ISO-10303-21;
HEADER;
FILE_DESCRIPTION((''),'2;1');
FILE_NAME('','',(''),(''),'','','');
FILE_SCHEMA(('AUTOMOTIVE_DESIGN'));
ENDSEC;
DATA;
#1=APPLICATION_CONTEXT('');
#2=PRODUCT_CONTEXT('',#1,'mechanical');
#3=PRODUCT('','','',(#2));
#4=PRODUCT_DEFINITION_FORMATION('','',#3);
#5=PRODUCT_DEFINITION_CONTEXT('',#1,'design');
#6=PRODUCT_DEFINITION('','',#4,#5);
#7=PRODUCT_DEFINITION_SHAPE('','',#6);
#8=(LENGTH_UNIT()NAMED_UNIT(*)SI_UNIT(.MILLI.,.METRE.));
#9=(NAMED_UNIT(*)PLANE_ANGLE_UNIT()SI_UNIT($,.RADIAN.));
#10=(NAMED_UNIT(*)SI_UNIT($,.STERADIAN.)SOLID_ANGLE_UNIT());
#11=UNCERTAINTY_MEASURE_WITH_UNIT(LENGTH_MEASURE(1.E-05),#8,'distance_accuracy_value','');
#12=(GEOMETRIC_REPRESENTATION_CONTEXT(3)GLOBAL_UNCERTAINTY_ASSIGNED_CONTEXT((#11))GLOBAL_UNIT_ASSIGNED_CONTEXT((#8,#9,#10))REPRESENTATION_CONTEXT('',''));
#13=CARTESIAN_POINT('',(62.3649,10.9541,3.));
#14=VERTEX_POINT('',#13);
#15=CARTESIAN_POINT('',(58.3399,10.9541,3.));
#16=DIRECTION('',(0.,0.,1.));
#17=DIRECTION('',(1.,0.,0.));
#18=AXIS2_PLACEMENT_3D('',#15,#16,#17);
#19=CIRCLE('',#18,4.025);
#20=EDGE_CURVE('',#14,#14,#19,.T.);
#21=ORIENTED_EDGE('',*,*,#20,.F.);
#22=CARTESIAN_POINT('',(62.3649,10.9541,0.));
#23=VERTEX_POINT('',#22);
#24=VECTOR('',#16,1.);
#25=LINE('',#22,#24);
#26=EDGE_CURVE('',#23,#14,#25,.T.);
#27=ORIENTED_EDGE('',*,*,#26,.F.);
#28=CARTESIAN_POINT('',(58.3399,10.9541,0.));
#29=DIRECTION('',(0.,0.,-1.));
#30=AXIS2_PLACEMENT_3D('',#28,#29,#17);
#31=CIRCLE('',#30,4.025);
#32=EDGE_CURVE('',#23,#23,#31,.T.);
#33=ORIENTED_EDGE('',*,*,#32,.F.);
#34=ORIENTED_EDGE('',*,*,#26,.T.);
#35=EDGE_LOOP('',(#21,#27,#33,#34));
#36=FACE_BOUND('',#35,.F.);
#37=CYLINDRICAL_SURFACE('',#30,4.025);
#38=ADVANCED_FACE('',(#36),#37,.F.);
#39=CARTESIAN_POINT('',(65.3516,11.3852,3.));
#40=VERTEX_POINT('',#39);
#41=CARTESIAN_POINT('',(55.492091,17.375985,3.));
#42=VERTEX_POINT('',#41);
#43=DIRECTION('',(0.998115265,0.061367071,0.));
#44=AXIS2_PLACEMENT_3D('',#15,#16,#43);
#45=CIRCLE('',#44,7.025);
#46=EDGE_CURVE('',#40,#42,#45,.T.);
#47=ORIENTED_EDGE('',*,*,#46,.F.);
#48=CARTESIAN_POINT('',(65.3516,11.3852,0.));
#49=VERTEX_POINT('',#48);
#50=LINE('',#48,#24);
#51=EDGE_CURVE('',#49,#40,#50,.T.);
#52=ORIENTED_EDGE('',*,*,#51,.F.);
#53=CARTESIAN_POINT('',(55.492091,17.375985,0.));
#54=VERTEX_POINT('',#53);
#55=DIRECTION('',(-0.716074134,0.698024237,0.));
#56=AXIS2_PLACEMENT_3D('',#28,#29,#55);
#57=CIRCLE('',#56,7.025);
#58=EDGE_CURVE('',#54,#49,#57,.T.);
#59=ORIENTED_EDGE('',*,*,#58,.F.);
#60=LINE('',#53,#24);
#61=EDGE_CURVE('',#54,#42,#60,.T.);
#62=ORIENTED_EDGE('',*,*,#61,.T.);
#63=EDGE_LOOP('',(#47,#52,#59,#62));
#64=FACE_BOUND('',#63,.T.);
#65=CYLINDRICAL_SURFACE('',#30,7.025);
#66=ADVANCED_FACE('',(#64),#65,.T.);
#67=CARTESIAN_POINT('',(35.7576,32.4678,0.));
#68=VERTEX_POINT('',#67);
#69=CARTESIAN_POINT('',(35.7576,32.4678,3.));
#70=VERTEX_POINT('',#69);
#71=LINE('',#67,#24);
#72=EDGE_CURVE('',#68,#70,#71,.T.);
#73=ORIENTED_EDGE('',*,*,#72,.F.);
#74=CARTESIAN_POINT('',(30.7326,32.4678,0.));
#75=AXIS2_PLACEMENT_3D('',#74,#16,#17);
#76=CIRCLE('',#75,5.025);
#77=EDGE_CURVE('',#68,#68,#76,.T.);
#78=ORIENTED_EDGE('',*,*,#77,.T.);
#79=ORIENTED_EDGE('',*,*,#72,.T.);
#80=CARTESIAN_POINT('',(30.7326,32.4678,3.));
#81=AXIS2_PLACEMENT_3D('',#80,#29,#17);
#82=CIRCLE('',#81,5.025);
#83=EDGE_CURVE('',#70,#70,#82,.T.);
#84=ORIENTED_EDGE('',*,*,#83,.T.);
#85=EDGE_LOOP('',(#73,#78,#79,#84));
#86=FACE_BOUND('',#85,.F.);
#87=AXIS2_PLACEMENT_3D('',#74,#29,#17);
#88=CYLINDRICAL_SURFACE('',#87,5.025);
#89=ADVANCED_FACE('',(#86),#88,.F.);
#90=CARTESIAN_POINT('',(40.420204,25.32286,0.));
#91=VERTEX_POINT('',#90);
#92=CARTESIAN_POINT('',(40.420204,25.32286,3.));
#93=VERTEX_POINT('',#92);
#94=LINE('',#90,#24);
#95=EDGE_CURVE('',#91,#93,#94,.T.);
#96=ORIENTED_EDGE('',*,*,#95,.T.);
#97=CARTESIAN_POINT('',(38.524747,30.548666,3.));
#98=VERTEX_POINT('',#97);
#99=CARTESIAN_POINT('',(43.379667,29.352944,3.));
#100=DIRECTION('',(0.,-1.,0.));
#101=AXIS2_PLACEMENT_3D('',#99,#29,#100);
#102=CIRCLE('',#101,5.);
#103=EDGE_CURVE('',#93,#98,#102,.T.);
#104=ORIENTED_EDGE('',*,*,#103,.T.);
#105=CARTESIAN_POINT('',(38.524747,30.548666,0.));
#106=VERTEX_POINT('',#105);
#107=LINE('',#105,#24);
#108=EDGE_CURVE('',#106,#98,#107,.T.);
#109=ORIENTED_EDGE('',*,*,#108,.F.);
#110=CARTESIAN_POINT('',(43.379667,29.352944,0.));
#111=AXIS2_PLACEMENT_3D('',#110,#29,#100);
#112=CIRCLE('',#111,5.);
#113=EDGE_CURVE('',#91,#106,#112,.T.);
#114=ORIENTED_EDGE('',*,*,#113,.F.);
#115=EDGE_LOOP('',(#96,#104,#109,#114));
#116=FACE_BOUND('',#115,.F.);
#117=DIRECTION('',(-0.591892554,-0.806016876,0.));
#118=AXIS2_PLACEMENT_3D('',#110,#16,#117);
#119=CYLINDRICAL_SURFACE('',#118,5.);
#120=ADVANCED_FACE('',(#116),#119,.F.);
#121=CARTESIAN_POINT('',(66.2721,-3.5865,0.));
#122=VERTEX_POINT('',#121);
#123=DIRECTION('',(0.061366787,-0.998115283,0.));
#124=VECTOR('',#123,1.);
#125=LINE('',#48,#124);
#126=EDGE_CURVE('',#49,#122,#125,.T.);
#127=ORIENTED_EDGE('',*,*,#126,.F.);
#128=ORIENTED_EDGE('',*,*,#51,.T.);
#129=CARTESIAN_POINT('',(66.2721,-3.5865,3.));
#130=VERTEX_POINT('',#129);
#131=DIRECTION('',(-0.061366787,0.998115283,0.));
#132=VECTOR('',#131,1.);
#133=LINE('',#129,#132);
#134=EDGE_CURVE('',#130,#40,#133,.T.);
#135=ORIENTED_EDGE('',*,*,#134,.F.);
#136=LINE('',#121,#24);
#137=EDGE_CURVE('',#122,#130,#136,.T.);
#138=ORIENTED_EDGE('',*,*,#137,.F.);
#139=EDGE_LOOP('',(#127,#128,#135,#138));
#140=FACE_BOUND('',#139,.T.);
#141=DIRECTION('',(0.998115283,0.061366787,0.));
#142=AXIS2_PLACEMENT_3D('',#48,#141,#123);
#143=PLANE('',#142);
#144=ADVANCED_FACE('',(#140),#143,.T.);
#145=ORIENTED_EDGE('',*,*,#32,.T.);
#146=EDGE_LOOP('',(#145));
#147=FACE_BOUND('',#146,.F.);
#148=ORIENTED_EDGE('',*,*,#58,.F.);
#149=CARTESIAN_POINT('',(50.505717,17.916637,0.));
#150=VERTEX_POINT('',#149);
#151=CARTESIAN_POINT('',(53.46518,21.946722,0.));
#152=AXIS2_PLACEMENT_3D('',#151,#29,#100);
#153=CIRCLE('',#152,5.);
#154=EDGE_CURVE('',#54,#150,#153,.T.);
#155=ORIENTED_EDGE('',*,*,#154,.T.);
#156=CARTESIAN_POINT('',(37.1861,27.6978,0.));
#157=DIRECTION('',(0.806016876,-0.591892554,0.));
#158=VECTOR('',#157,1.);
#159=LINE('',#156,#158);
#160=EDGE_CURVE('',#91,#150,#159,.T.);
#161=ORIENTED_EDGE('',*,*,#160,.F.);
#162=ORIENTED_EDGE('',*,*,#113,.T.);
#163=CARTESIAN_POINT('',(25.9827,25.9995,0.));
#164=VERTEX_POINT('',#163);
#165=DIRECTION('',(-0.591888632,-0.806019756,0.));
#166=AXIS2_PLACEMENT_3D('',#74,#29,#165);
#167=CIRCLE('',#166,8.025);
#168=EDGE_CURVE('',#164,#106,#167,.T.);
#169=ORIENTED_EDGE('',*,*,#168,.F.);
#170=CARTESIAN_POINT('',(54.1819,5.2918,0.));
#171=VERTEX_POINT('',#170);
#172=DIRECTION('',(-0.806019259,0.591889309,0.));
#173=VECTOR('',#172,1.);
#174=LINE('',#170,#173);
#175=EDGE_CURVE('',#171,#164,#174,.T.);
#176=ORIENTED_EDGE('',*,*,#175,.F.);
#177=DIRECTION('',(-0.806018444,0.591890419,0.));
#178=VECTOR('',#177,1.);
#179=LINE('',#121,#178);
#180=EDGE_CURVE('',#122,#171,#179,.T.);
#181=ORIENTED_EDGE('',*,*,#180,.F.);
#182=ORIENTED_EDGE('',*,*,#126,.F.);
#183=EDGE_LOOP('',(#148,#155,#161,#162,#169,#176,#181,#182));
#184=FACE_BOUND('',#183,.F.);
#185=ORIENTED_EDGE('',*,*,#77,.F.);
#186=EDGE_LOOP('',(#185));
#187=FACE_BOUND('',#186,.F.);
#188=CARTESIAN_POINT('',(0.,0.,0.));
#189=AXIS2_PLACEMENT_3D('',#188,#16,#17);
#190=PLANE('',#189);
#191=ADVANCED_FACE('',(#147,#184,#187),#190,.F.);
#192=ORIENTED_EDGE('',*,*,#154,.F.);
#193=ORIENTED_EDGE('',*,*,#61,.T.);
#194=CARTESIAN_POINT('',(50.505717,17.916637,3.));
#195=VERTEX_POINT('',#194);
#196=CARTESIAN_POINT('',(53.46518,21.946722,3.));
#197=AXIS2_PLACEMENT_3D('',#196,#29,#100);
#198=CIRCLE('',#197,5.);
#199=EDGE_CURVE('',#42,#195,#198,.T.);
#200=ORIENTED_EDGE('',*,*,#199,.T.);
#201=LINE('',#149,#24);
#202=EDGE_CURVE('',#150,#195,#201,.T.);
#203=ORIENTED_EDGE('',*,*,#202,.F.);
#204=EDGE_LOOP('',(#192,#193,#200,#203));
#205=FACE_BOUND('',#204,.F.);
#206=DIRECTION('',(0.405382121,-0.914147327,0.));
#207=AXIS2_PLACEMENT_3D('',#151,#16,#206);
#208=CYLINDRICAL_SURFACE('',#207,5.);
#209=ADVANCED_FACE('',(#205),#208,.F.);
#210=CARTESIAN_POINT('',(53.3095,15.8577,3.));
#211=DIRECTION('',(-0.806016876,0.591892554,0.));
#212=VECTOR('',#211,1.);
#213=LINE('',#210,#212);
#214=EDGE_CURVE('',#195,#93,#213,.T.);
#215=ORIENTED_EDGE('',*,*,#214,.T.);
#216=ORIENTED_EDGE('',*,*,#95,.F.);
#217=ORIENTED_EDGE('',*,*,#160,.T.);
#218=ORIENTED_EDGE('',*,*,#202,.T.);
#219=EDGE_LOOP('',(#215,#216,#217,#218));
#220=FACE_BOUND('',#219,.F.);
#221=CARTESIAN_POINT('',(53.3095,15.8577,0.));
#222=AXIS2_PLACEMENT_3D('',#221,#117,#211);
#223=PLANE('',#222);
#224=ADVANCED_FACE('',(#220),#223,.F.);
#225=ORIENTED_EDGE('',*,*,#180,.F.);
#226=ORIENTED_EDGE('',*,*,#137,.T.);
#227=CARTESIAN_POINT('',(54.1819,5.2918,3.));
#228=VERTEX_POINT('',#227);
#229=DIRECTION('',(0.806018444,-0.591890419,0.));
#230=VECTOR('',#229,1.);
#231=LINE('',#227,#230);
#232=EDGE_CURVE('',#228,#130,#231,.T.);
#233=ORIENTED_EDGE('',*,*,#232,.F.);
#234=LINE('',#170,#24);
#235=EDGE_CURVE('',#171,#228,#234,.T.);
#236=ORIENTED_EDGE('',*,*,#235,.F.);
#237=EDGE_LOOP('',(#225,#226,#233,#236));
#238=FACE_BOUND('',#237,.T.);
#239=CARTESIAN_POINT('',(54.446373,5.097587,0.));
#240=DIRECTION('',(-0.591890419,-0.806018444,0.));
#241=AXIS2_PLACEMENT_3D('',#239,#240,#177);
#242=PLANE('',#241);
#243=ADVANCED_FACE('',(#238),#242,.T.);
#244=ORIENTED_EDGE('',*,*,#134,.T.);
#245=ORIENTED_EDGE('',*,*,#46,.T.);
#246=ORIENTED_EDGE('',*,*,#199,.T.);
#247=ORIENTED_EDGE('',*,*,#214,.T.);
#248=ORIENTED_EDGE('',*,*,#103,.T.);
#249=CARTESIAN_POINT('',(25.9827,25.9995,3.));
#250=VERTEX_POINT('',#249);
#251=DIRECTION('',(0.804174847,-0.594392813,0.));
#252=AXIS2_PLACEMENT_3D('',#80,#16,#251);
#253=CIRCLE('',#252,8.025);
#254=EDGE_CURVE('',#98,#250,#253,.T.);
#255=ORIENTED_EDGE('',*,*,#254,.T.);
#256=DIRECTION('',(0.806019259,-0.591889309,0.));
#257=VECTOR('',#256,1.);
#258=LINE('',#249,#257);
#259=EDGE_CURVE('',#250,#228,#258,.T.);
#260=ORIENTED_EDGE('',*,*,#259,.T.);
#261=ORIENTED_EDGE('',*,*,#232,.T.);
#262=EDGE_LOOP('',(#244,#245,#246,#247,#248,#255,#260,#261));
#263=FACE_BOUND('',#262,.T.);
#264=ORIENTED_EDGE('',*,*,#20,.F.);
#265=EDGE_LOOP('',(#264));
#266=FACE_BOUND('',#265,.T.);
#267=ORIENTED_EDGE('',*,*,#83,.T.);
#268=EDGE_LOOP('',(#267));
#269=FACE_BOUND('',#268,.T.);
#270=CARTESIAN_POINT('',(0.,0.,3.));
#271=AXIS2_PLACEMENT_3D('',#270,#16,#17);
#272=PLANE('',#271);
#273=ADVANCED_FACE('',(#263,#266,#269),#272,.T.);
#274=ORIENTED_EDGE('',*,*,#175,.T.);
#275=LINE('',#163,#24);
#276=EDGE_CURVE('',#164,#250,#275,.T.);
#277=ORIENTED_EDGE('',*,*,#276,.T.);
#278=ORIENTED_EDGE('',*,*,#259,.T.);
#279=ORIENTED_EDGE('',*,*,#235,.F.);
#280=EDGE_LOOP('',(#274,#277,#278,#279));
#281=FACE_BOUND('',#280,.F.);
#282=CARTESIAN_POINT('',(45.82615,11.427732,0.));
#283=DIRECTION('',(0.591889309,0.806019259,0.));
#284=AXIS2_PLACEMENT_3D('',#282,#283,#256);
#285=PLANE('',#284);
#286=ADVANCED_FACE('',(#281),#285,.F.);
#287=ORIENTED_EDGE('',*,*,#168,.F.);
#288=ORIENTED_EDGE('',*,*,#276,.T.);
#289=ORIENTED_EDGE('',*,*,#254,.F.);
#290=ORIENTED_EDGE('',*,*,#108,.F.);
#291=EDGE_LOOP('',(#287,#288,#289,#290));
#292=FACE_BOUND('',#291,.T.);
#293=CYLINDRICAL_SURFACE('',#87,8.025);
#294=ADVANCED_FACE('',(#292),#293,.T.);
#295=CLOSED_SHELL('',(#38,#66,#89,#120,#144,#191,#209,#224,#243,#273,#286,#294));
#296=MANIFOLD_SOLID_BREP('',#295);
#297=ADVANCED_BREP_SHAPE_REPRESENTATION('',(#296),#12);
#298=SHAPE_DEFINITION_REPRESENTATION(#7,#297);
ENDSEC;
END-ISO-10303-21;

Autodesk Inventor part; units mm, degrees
ref_plane "YZ Plane" through (0, 0, 0) normal (1, 0, 0) x (0, 1, 0)
ref_plane "XZ Plane" through (0, 0, 0) normal (0, 1, 0) x (-1, 0, 0)
ref_plane "XY Plane" through (0, 0, 0) normal (0, 0, 1) x (1, 0, 0)
sketch "スケッチ1" plane through (0, 0, 0) normal (0, 0, 1) x (1, 0, 0)
  line L0 (-170.6512, -31.4118) -> (202.8656, -31.4118) construction
  circle A0 centre (-14, -17.4118) radius 14 construction
  circle A1 centre (14, -17.4118) radius 14 construction
  circle A2 centre (-28.0204, 0.0121) radius 20.05 construction
  circle A3 centre (-28.0204, 0.0121) radius 5.05 construction
  circle A4 centre (8.8763, 3.8907) radius 32.05 construction
  circle A5 centre (8.8763, 3.8907) radius 10.1 construction
  circle A6 centre (54.047, 13.5882) radius 36.1 construction
  line L1 (-170.915, -81.4118) -> (490.0044, -81.4118)
  circle A7 centre (-28.0204, 0.0121) radius 22.342 construction
  circle A8 centre (-39.4931, 19.1835) radius 14 construction
  circle A9 centre (-49.0547, 7.5438) radius 14 construction
  circle A10 centre (-49.0547, -7.5196) radius 14 construction
  circle A11 centre (-39.4931, -19.1593) radius 14 construction
  circle A12 centre (8.8763, 3.8907) radius 33.05 construction
  circle A13 centre (54.047, 13.5882) radius 38.1 construction
  line L2 (-11.5565, -29.1593) -> (4.2969, -29.1593) construction
  line L3 (-67.2952, 44.8622) -> (-67.2952, -57.3934) construction
  line L4 (-149.4523, -1.6098) -> (-132.6633, -31.6026)
  line L5 (-132.7701, -31.4118) -> (-132.7701, 74.0456)
  circle A14 centre (-11.4931, -19.1593) radius 14 construction
  line L6 (-197.2268, -33.1593) -> (179.6604, -33.1593) construction
  circle A15 centre (54.047, 13.5882) radius 4.025
  circle A16 centre (54.047, 13.5882) radius 6
  circle A17 centre (-39.4931, 19.1835) radius 5
  circle A18 centre (-49.0547, 7.5438) radius 5
  circle A19 centre (-49.0547, -7.5196) radius 5
  circle A20 centre (-39.4931, -19.1593) radius 5
  circle A21 centre (-39.4931, 19.1835) radius 8 construction
  circle A22 centre (-49.0547, 7.5438) radius 8 construction
  circle A23 centre (-49.0547, -7.5196) radius 8 construction
  circle A24 centre (-39.4931, -19.1593) radius 8 construction
  circle A25 centre (-28.0204, 0.0121) radius 4.5
  circle A26 centre (8.8763, 3.8907) radius 7.5
  line L7 (-17.5497, 32.3149) -> (-46.3578, 15.0755) construction
  line L8 (-46.3578, 15.0755) -> (-51.7515, 0.0121) construction
  line L9 (-51.7515, 0.0121) -> (-46.3578, -15.0513) construction
  line L10 (-46.3578, -15.0513) -> (-37.9391, -20.0892) construction
  circle A27 centre (-32.6283, 23.2915) radius 1.3
  circle A28 centre (-46.3578, 15.0755) radius 1.3
  circle A29 centre (-51.7515, 0.0121) radius 1.3
  circle A30 centre (-46.3578, -15.0513) radius 1.3
  circle A31 centre (-32.6283, -23.2673) radius 1.3
  line L11 (-67.2952, 23.1796) -> (-67.2952, -18.1327)
  arc A32 (79.2003, -37.212) -> (87.3507, -31.2711) centre (80.4159, -30.3183) ccw
  arc A33 (8.1864, 50.8943) -> (0.9804, 51.9708) centre (3.7003, 45.5208) ccw
  line L12 (-52.2685, -33.1593) -> (56.2168, -33.1593)
  line L13 (56.2168, -33.1593) -> (79.2003, -37.212)
  arc A34 (92.7831, 8.2659) -> (29.742, 44.2162) centre (54.047, 13.5882) ccw
  line L14 (87.3507, -31.2711) -> (92.7831, 8.2659)
  line L15 (0.9804, 51.9708) -> (-67.2952, 23.1796)
  circle A35 centre (34.0114, -24.0061) radius 4.5 construction
  circle A36 centre (34.0114, -24.0061) radius 1.5
  circle A37 centre (-21.4477, 26.0369) radius 4.5 construction
  circle A38 centre (-21.4477, 26.0369) radius 1.5
  circle A39 centre (-56.0504, 23.0377) radius 1.5
  circle A40 centre (-56.0504, 23.0377) radius 3 construction
  circle A41 centre (-56.0504, 23.0377) radius 4.5 construction
  circle A42 centre (-64.2952, 0.0121) radius 1.5
  circle A43 centre (-64.2952, 0.0121) radius 3 construction
  circle A44 centre (-64.2952, 0.0121) radius 4.3311 construction
  line L16 (54.047, 13.5882) -> (99.37, -7.5264)
  line L17 (99.37, -7.5264) -> (58.3399, 10.9541)
  line L18 (58.3399, 10.9541) -> (30.7326, 32.4678)
  line L19 (30.7326, 32.4678) -> (54.047, 13.5882)
  line L20 (99.37, -7.5264) -> (491.4359, -184.1173)
  line L21 (-183.2789, 162.2213) -> (-183.2789, -125.2315)
  line L22 (516.7211, 155.5913) -> (516.7211, -155.5644)
  circle A45 centre (99.37, -7.5264) radius 7.25
  line L23 (135.8413, -23.9534) -> (383.826, -192.7834) construction
  line L24 (218.8627, -80.4751) -> (224.047, -10.6673) construction
  circle A46 centre (3.7003, 45.5208) radius 4
  circle A47 centre (122.1646, -17.7933) radius 2
  circle A48 centre (135.8413, -23.9534) radius 2
  arc A49 (134.404, -28.7424) -> (138.4753, -19.7035) centre (135.8413, -23.9534) ccw
  line L25 (134.404, -28.7424) -> (96.4236, -17.3438)
  line L26 (138.4753, -19.7035) -> (104.7697, 1.1861)
  circle A50 centre (30.7326, 32.4678) radius 2
  circle A51 centre (-16.1798, -24.0771) radius 4.5 construction
  circle A52 centre (-16.1798, -24.0771) radius 1.5
  line L27 (-67.2952, -18.1327) -> (-52.2685, -33.1593)
  circle A53 centre (-56.0504, -23.0135) radius 1.5
  circle A54 centre (-56.0504, -23.0135) radius 3 construction
  circle A55 centre (30.7326, 32.4678) radius 4
  arc A56 (56.8403, 15.6972) -> (51.3644, 11.3402) centre (54.047, 13.5882) ccw
  line L28 (96.4916, -6.1854) -> (101.9705, -5.7041) construction
  line L29 (101.9705, -5.7041) -> (99.6479, -10.6896) construction
  line L30 (99.6479, -10.6896) -> (96.4916, -6.1854) construction
  circle A57 centre (99.6479, -10.6896) radius 1.5
  circle A58 centre (101.9705, -5.7041) radius 1.5
  circle A59 centre (96.4916, -6.1854) radius 1.5
  circle A60 centre (99.37, -7.5264) radius 6
  arc A61 (97.7876, -15.8778) -> (97.5111, 0.7679) centre (99.37, -7.5264) ccw
  arc A62 (56.8403, 15.6972) -> (97.5111, 0.7679) centre (88.7632, 39.7996) ccw
  arc A63 (51.3644, 11.3402) -> (97.7876, -15.8778) centre (112.6811, 62.7237) ccw
  circle A64 centre (54.047, 13.5882) radius 8.5
  line L31 (102.9595, 0.1786) -> (57.6365, 21.2931)
  line L32 (50.4575, 5.8833) -> (95.7806, -15.2313)
  circle A65 centre (12.7384, 41.2415) radius 3 construction
  circle A66 centre (12.7384, 41.2415) radius 4.5 construction
  circle A67 centre (12.7384, 41.2415) radius 1.5
  circle A68 centre (80.4159, -30.3183) radius 4
  circle A69 centre (69.7531, -26.0108) radius 1.5
  circle A70 centre (69.7531, -26.0108) radius 4.5 construction
  circle A71 centre (-56.0504, -23.0135) radius 4.5 construction
  line L33 (8.1864, 50.8943) -> (15.9809, 44.3871)
  arc A72 (15.9809, 44.3871) -> (29.742, 44.2162) centre (22.9664, 52.7545) ccw
  circle A73 centre (-5.4761, 38.5895) radius 1.5
  circle A74 centre (-5.4761, 38.5895) radius 4.5 construction
  circle A75 centre (54.047, 13.5882) radius 50 construction
  circle A76 centre (3.7003, 45.5208) radius 2
  circle A77 centre (80.4159, -30.3183) radius 2
  circle A78 centre (54.047, 13.5882) radius 1.5 construction
  circle A79 centre (58.3399, 10.9541) radius 1.5
  circle A80 centre (58.3399, 10.9541) radius 3
  circle A81 centre (58.3399, 10.9541) radius 5
  line L34 (94.099, -16.3172) -> (55.7687, 6.6659)
  line L35 (59.8474, 15.7214) -> (102.4604, 2.2467)
  arc A82 (104.7697, 1.1861) -> (102.4604, 2.2467) centre (99.37, -7.5264) ccw
  arc A83 (94.099, -16.3172) -> (96.4236, -17.3438) centre (99.37, -7.5264) ccw
  circle A84 centre (30.7326, 32.4678) radius 5.025
  circle A85 centre (30.7326, 32.4678) radius 8.025
  circle A86 centre (58.3399, 10.9541) radius 4.025
  circle A87 centre (58.3399, 10.9541) radius 7.025
  line L36 (25.9827, 25.9995) -> (54.1819, 5.2918)
  line L37 (53.3095, 15.8577) -> (37.1861, 27.6978)
  line L38 (65.3516, 11.3852) -> (66.2721, -3.5865)
  line L39 (66.2721, -3.5865) -> (54.1819, 5.2918)
  point P0 (0, 0)
  point P1 (0, 0)
  point P2 (-49.0547, 7.5438)
  point P3 (-49.0547, -7.5196)
  dimension "d88" = 100
  dimension "d0" = 40.1
  dimension "d1" = 10.1
  dimension "d2" = 64.1
  dimension "d3" = 20.2
  dimension "d4" = 72.2
  dimension "d5" = 95
  dimension "d6" = 44.684
  dimension "d7" = 28
  dimension "d8" = 28
  dimension "d9" = 28
  dimension "d10" = 28
  dimension "d11" = 1
  dimension "d12" = 2
  dimension "d13" = 4
  dimension "d14" = 8.05
  dimension "d15" = 12
  dimension "d16" = 10
  dimension "d17" = 10
  dimension "d18" = 10
  dimension "d19" = 10
  dimension "d20" = 3
  dimension "d21" = 3
  dimension "d22" = 3
  dimension "d23" = 3
  dimension "d24" = 9
  dimension "d25" = 15
  dimension "d26" = 2.6
  dimension "d27" = 2.6
  dimension "d28" = 2.6
  dimension "d29" = 2.6
  dimension "d30" = 2.6
  dimension "d31" = 1
  dimension "d32" = 9
  dimension "d33" = 3
  dimension "d34" = 9
  dimension "d35" = 3
  dimension "d36" = 3
  dimension "d37" = 6
  dimension "d38" = 9
  dimension "d39" = 3
  dimension "d40" = 6
  dimension "d41" = 50
  dimension "d42" = 45
  dimension "d43" = 35
  dimension "d44" = 30
  dimension "d45" = 39
  dimension "d46" = 430
  dimension "d47" = 700
  dimension "d48" = 14.5
  dimension "d49" = 300
  dimension "d50" = 10
  dimension "d51" = 70
  dimension "d52" = 120
  dimension "d53" = 140
  dimension "d54" = 8
  dimension "d55" = 4
  dimension "d56" = 4
  dimension "d57" = 15
  dimension "d58" = 25
  dimension "d59" = 10
  dimension "d60" = 4
  dimension "d61" = 9
  dimension "d62" = 3
  dimension "d63" = 3
extrude "押し出し1" add sketch "スケッチ1" along normal blind 3 contours A86 A62 A56 A81 A15 | A15 A81 A16 A86 | A86 L18 A81 A56 A62 | A86 L16 A81 L18 | A81 A56 A87 A15 | A15 A87 A16 A81 | A16 A81 A64 A86 | A81 L16 L19 A87 L18 | L18 A87 A56 A81 | A86 A15 A81 L16 | A16 A87 A64 L35 A81 | A64 A81 L16 A62 A86 | A87 L19 A56 L18 | L18 A56 L37 A87 | A81 A15 A63 A56 A87 L19 L16 | A86 A16 A63 A81 A15 | L37 A56 L18 A15 | A15 L18 A16 L37 | L35 A64 A81 | A62 L16 A86 | A56 L19 A15 L18 | A87 A56 L19 | A81 A63 A15 | A86 A64 A81 A63 A16 | A15 L19 A16 L18 | A16 L18 A64 L37 | A87 L35 A64 | A64 L35 A87 L16 A81 | A62 A81 L17 A86 L16 | L16 A81 A62 | A56 A87 A15 L19 | A56 A63 A15 A87 | A63 A81 A16 A87 A15 | A63 A16 A81 | A63 A81 A16 | A86 L17 A81 A64 | A15 A87 A16 L19 | A16 L19 A64 L18 | A64 L18 A85 L37 | L16 A87 L17 A62 A81 | A62 L17 A81 | A81 A63 A64 A87 A16 | A81 L34 A64 A63 | A81 L17 A62 A87 L34 A64 | A64 L34 A81 | A16 A87 L36 A64 L19 | A64 L19 A85 L18 | A85 L18 A84 L19 | L38 L16 A87 | L16 L38 L17 A87 | L17 A87 A62 | A64 L34 A87 A63 | A63 A87 A64 | A64 L36 A85 L19 | A85 L19 A84 L18 | L17 L38 A62 A87 | A62 L38 L34 A87 | A87 A64 L39 | A87 L34 L38 L32 A63 | A63 L32 L39 A64 A87 | L32 L38 A63 | A63 L38 L39 L32
fillet "フィレット1" radius 5 2 edges at (37.1861, 27.6978, 1.5) (53.3095, 15.8577, 1.5)
properties part number "アーム揺動節" material "アルミニウム 7075"
